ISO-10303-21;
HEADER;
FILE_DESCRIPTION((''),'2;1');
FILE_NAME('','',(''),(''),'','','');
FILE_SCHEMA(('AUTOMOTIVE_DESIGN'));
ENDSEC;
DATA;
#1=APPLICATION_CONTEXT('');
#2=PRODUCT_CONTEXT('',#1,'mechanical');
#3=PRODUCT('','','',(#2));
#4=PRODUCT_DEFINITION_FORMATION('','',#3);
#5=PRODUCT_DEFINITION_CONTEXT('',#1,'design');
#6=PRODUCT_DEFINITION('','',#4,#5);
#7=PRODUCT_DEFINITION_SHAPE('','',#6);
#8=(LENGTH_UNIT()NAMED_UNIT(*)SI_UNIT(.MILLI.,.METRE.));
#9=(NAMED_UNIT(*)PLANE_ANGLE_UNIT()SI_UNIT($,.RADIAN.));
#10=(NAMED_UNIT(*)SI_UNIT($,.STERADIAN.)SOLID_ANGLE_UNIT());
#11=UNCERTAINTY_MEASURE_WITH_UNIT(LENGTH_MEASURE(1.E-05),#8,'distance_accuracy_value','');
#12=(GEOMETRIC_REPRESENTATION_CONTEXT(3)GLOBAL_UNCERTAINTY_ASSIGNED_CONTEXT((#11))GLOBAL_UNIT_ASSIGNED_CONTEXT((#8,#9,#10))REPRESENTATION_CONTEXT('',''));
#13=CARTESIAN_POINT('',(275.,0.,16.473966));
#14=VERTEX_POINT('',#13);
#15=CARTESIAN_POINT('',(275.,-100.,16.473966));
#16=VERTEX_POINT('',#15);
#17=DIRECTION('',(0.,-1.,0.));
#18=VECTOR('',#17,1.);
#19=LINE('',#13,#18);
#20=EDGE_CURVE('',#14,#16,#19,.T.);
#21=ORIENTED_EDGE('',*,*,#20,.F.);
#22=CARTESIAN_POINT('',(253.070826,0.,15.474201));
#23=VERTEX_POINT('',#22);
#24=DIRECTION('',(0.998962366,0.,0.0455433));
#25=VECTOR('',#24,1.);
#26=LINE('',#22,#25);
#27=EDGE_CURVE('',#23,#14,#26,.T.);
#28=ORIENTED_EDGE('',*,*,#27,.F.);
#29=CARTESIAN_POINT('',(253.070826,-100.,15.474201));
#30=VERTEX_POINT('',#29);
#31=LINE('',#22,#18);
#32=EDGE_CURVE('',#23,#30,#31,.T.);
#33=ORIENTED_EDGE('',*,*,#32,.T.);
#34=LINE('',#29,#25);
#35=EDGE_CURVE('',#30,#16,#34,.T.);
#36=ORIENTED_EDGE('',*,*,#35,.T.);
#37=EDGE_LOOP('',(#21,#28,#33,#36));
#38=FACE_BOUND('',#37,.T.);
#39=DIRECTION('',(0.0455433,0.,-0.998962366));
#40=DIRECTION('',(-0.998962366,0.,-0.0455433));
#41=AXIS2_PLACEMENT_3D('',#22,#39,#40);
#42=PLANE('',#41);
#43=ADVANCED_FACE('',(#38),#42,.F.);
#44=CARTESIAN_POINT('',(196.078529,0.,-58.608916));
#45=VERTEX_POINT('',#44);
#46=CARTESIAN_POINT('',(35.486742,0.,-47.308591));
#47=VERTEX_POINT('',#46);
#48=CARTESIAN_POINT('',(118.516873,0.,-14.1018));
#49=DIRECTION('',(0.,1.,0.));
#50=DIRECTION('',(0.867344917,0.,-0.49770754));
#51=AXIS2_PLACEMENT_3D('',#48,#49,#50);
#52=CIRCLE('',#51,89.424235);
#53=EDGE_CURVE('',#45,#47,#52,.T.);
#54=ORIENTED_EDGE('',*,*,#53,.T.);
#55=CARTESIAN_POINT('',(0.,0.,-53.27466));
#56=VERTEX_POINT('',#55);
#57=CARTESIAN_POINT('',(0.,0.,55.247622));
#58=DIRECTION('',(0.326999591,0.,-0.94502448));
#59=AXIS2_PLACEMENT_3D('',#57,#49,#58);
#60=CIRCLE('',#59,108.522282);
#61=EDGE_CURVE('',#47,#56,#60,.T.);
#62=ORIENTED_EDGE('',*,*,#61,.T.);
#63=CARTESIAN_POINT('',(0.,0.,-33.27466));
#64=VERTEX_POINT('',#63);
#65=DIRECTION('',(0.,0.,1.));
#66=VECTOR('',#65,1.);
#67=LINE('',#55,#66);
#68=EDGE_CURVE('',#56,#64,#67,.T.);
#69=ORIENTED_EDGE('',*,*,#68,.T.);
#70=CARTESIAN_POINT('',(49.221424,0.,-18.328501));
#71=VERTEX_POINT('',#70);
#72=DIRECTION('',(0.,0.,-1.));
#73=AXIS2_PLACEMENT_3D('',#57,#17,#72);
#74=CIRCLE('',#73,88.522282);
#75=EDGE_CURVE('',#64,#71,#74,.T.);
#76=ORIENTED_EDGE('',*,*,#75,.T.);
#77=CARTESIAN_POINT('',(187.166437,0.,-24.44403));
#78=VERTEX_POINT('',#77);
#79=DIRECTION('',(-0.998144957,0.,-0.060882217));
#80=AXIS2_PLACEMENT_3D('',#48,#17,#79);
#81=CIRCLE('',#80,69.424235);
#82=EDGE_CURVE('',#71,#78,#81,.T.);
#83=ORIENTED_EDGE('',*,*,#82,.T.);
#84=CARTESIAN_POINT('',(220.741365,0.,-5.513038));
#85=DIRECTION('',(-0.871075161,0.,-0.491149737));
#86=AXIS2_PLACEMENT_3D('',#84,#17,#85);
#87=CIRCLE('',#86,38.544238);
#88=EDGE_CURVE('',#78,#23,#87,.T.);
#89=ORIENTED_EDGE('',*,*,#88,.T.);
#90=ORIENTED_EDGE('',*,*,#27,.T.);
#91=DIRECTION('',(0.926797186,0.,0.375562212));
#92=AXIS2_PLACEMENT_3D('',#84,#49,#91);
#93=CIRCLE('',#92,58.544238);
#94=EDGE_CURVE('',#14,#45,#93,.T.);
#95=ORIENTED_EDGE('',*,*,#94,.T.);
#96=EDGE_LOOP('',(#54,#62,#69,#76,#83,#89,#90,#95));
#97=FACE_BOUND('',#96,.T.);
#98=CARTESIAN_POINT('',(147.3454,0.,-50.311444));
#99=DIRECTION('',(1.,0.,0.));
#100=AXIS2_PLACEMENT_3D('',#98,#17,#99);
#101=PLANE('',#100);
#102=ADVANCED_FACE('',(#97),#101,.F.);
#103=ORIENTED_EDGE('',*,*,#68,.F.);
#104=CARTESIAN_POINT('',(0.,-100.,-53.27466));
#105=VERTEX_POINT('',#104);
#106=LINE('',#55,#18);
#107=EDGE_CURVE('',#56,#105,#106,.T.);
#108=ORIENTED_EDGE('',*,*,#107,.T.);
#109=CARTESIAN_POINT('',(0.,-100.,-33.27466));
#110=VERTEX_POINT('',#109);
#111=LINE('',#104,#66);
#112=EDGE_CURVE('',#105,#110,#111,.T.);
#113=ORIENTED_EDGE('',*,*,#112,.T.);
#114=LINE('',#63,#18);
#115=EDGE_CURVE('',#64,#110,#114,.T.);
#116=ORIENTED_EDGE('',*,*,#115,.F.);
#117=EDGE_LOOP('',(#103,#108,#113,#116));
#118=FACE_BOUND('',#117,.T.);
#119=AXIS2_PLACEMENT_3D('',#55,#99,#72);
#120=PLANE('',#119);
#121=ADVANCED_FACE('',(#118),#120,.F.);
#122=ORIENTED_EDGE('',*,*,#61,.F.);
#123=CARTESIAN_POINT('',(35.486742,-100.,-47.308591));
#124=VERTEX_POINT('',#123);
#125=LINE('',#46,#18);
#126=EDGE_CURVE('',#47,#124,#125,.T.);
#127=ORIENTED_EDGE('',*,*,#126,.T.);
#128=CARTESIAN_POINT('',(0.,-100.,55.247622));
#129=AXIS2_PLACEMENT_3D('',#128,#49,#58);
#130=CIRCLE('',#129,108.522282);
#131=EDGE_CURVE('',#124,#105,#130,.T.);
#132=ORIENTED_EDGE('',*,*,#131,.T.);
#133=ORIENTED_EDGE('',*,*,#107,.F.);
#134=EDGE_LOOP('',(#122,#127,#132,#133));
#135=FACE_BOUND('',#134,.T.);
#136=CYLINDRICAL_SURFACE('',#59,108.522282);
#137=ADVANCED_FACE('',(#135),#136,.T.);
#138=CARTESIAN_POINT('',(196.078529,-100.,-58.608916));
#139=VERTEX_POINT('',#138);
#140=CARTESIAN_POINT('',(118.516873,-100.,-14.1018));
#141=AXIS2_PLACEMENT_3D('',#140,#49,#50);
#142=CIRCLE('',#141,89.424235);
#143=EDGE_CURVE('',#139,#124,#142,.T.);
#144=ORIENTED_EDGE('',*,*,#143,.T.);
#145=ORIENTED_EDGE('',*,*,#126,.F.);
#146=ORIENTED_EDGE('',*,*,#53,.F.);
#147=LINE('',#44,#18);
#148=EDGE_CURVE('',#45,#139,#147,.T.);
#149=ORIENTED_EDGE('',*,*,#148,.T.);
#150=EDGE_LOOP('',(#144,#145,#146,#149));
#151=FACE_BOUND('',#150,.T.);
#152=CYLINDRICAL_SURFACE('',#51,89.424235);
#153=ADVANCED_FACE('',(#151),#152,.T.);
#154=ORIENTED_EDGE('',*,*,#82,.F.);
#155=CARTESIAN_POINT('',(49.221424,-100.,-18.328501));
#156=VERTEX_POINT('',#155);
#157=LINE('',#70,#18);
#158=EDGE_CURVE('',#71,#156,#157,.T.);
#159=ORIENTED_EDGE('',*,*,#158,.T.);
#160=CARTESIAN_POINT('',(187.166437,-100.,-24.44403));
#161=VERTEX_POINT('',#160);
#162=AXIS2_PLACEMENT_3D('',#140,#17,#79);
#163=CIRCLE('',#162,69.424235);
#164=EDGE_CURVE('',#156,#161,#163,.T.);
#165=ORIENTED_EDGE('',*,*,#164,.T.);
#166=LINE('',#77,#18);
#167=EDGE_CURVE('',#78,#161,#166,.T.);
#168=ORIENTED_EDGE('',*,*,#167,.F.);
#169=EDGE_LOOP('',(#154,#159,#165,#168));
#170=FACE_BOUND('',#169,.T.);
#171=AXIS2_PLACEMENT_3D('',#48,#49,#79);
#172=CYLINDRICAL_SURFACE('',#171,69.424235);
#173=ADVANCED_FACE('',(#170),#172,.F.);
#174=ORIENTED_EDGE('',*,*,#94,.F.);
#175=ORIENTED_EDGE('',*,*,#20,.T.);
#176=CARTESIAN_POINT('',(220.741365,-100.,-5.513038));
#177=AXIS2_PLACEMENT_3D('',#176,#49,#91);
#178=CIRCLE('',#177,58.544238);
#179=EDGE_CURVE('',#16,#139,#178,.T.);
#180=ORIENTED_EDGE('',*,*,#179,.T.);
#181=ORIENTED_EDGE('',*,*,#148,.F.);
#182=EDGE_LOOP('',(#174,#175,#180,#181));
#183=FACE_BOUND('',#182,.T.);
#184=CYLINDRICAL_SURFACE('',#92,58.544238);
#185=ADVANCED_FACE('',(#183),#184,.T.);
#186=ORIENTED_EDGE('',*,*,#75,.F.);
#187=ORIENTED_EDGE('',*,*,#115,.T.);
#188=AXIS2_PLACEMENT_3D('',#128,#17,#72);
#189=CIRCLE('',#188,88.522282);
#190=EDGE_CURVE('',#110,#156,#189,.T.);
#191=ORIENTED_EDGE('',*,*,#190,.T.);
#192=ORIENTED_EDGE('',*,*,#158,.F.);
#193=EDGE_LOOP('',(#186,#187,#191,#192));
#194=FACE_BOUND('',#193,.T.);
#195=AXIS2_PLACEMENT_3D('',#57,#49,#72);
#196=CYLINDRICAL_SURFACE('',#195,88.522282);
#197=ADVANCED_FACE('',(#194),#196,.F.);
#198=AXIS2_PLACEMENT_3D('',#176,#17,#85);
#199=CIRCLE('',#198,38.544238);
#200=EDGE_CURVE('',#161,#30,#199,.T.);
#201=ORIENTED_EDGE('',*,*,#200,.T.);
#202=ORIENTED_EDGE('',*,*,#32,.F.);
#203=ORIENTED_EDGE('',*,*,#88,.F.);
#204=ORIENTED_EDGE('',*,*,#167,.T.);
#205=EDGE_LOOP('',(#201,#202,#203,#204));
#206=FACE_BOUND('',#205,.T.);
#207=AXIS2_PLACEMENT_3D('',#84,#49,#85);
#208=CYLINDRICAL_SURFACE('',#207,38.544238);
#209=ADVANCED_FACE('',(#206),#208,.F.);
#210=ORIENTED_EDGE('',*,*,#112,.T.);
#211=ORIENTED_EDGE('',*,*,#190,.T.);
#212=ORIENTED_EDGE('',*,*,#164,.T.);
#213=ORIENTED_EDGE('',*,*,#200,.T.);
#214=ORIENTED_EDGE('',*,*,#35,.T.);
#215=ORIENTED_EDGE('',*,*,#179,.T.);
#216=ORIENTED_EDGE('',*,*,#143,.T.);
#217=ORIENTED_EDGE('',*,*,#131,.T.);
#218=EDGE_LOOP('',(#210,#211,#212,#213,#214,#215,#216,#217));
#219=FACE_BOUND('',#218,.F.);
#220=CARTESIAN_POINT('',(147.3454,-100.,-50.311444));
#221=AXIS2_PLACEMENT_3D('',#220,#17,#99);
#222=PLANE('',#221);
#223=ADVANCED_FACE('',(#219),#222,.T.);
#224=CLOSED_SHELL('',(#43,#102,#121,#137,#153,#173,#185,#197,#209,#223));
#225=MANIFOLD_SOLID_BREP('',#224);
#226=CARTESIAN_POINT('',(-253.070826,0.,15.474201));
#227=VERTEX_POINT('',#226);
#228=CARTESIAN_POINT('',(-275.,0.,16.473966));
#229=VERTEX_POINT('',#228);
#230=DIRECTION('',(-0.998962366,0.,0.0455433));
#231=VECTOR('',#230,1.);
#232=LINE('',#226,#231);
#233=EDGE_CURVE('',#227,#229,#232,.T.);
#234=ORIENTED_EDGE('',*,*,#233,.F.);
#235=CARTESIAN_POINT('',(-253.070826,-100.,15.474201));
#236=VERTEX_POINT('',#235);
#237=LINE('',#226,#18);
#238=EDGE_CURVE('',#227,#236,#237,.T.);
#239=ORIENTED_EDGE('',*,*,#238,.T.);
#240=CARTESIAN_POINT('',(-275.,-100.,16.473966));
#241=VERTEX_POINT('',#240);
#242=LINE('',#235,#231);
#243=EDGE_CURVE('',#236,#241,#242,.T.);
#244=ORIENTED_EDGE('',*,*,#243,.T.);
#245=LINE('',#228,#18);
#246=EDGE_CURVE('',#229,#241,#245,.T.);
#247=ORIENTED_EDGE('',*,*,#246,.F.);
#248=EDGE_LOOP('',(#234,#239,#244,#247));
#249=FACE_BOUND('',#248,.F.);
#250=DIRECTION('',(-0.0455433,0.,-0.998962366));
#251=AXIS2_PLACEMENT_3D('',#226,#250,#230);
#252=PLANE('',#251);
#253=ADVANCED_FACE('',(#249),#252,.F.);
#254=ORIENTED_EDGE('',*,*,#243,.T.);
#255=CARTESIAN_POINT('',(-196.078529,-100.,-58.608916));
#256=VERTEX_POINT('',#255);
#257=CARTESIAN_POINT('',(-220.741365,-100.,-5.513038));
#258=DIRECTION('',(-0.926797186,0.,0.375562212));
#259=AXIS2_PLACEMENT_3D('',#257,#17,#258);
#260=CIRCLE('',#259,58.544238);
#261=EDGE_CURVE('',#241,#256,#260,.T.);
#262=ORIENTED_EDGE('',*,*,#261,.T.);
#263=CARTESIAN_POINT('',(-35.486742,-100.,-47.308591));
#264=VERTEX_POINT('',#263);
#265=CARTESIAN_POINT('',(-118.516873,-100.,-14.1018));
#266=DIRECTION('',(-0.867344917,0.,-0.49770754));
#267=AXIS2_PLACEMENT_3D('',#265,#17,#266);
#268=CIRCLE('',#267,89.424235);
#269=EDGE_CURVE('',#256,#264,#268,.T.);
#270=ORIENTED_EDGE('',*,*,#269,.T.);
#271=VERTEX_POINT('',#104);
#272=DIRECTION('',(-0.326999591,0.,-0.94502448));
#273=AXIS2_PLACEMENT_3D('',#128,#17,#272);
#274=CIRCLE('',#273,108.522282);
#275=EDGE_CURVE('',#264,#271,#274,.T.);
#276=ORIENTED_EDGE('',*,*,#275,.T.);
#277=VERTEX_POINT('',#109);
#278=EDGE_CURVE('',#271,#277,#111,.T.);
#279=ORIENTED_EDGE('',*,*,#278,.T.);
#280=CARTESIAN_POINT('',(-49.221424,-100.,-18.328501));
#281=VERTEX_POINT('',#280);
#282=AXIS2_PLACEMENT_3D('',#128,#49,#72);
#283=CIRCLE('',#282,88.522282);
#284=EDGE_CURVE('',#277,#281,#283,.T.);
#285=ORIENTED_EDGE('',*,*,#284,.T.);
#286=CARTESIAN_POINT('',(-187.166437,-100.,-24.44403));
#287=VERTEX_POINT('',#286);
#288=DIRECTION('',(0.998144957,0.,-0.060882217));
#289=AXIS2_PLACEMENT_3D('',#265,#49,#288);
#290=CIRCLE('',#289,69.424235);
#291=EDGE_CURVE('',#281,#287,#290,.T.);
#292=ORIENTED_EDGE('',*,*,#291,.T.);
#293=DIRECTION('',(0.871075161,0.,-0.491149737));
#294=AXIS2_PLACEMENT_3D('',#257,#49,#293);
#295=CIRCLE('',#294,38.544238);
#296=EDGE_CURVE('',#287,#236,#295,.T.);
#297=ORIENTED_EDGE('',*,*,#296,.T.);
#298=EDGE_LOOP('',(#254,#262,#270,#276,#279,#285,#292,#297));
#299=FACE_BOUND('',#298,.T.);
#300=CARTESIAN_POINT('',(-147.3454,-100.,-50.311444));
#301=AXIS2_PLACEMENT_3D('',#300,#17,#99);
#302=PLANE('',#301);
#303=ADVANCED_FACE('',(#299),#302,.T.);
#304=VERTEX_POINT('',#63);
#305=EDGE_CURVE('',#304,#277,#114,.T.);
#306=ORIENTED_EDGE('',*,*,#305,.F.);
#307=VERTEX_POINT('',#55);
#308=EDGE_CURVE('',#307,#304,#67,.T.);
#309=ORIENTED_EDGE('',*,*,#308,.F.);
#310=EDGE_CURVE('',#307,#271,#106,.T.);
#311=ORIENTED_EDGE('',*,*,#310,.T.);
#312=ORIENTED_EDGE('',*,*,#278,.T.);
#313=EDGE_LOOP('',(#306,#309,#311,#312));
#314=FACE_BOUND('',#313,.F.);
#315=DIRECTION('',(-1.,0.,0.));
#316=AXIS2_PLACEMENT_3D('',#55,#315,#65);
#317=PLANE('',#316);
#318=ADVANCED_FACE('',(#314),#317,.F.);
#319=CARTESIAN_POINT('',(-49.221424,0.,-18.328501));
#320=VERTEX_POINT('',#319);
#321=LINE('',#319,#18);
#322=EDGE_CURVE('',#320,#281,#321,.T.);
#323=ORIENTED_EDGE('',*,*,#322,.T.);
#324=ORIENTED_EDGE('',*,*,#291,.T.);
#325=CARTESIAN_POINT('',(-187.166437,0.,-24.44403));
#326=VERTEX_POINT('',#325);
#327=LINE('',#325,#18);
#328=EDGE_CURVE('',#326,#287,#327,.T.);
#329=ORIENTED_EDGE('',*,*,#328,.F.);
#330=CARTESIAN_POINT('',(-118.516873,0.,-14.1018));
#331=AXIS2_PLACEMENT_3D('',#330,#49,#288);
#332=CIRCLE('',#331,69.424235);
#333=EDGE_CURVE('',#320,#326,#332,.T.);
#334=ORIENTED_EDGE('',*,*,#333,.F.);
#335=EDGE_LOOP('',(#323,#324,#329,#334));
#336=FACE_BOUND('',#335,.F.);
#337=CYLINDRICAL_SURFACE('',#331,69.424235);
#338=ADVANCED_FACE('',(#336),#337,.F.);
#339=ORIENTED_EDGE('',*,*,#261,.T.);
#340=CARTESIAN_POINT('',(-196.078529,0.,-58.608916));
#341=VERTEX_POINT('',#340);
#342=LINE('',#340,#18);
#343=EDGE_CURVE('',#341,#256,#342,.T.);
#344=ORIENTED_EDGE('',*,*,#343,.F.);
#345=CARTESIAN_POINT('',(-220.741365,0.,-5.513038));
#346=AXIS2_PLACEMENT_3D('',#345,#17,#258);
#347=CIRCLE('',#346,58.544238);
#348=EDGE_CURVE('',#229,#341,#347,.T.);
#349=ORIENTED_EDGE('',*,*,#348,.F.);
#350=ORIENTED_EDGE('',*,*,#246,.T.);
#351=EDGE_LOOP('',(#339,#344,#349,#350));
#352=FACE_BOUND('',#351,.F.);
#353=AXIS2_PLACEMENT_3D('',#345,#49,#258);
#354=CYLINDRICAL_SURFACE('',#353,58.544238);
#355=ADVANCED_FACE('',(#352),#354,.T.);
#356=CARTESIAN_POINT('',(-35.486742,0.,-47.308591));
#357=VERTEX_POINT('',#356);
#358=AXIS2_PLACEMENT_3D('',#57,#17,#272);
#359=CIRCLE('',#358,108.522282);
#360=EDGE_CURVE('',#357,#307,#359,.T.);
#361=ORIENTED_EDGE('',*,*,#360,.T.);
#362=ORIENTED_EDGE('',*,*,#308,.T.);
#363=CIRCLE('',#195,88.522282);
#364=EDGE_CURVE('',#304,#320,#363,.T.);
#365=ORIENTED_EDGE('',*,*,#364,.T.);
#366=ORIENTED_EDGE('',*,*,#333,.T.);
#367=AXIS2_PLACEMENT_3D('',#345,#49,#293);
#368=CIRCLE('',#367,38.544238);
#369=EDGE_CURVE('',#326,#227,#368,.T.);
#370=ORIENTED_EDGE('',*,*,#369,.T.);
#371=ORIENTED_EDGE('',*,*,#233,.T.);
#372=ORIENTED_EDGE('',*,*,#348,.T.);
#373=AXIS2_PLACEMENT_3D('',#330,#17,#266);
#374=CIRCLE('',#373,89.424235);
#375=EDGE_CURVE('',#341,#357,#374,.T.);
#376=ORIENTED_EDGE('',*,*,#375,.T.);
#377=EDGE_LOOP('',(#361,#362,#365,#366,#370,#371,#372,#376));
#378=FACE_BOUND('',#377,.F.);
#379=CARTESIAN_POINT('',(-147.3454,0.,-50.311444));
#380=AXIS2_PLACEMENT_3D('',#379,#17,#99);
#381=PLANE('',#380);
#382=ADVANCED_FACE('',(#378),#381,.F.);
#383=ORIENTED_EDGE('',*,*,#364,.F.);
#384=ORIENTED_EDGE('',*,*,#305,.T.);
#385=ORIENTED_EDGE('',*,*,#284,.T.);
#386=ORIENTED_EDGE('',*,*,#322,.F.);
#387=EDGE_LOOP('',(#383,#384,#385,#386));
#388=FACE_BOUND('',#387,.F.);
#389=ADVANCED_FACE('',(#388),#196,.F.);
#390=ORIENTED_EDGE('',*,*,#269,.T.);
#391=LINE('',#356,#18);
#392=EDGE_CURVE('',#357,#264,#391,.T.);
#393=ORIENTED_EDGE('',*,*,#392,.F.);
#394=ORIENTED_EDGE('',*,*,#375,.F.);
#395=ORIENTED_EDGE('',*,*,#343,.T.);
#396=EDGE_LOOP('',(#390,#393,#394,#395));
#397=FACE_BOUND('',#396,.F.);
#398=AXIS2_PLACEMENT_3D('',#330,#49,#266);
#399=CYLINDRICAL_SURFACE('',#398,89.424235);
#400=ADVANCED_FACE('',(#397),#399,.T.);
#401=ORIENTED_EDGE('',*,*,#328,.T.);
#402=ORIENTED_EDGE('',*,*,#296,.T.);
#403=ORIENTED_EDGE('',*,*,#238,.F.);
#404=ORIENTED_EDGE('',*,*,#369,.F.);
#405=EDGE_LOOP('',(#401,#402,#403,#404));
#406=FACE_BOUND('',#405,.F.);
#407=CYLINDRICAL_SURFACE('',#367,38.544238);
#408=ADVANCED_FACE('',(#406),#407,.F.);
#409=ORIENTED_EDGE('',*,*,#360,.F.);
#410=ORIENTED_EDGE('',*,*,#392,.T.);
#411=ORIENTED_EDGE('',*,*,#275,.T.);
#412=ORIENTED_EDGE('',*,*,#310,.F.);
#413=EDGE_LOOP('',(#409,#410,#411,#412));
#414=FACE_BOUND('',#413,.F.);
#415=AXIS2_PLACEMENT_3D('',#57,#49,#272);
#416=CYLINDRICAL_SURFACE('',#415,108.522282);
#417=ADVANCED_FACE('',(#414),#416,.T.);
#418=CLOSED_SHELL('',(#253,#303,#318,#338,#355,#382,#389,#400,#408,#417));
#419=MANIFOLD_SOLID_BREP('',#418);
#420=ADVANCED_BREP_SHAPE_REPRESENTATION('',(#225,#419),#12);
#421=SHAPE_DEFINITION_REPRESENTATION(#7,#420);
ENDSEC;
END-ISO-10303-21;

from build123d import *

# Parameters (mm, degrees)
F1_DEPTH = 100


# Not quite as in the source:
# - a pattern or mirror of a feature is missing from the dataset's text; its kind, count and spacing are read off the source's solid


with BuildPart() as f1:
    # F0 (on Front) → F1 (new body)
    with BuildSketch(Plane.XZ):
        with BuildLine():
            Line((-253.070826319, 15.4742012591), (-275, 16.4739655934))
            ThreePointArc((-275, 16.4739655934), (-261.0940304281, -47.9287208885), (-196.0785287696, -58.6089156394))
            ThreePointArc((-196.0785287696, -58.6089156394), (-112.2399003638, -103.305461967), (-35.4867419071, -47.3085912196))
            ThreePointArc((-35.4867419071, -47.3085912196), (-17.9923791465, -51.7727499469), (0, -53.2746601281))
            Line((0, -53.2746601281), (0, -33.2746601281))
            ThreePointArc((0, -33.2746601281), (-25.7203043518, -29.4557449875), (-49.2214237237, -18.3285010758))
            ThreePointArc((-49.2214237237, -18.3285010758), (-115.4421026575, -83.4579108167), (-187.166437391, -24.4440299182))
            ThreePointArc((-187.166437391, -24.4440299182), (-240.7101933499, -38.4812673083), (-253.070826319, 15.4742012591))
        make_face()
    extrude(amount=F1_DEPTH)


with BuildPart() as f1_copies_1:
    # F1_copies: instance of F1
    add(f1.part.mirror(Plane(origin=(0, 0, 0), x_dir=(0, 0, 1), z_dir=(1, 0, 0))))


solid = Compound([f1.part, f1_copies_1.part])
